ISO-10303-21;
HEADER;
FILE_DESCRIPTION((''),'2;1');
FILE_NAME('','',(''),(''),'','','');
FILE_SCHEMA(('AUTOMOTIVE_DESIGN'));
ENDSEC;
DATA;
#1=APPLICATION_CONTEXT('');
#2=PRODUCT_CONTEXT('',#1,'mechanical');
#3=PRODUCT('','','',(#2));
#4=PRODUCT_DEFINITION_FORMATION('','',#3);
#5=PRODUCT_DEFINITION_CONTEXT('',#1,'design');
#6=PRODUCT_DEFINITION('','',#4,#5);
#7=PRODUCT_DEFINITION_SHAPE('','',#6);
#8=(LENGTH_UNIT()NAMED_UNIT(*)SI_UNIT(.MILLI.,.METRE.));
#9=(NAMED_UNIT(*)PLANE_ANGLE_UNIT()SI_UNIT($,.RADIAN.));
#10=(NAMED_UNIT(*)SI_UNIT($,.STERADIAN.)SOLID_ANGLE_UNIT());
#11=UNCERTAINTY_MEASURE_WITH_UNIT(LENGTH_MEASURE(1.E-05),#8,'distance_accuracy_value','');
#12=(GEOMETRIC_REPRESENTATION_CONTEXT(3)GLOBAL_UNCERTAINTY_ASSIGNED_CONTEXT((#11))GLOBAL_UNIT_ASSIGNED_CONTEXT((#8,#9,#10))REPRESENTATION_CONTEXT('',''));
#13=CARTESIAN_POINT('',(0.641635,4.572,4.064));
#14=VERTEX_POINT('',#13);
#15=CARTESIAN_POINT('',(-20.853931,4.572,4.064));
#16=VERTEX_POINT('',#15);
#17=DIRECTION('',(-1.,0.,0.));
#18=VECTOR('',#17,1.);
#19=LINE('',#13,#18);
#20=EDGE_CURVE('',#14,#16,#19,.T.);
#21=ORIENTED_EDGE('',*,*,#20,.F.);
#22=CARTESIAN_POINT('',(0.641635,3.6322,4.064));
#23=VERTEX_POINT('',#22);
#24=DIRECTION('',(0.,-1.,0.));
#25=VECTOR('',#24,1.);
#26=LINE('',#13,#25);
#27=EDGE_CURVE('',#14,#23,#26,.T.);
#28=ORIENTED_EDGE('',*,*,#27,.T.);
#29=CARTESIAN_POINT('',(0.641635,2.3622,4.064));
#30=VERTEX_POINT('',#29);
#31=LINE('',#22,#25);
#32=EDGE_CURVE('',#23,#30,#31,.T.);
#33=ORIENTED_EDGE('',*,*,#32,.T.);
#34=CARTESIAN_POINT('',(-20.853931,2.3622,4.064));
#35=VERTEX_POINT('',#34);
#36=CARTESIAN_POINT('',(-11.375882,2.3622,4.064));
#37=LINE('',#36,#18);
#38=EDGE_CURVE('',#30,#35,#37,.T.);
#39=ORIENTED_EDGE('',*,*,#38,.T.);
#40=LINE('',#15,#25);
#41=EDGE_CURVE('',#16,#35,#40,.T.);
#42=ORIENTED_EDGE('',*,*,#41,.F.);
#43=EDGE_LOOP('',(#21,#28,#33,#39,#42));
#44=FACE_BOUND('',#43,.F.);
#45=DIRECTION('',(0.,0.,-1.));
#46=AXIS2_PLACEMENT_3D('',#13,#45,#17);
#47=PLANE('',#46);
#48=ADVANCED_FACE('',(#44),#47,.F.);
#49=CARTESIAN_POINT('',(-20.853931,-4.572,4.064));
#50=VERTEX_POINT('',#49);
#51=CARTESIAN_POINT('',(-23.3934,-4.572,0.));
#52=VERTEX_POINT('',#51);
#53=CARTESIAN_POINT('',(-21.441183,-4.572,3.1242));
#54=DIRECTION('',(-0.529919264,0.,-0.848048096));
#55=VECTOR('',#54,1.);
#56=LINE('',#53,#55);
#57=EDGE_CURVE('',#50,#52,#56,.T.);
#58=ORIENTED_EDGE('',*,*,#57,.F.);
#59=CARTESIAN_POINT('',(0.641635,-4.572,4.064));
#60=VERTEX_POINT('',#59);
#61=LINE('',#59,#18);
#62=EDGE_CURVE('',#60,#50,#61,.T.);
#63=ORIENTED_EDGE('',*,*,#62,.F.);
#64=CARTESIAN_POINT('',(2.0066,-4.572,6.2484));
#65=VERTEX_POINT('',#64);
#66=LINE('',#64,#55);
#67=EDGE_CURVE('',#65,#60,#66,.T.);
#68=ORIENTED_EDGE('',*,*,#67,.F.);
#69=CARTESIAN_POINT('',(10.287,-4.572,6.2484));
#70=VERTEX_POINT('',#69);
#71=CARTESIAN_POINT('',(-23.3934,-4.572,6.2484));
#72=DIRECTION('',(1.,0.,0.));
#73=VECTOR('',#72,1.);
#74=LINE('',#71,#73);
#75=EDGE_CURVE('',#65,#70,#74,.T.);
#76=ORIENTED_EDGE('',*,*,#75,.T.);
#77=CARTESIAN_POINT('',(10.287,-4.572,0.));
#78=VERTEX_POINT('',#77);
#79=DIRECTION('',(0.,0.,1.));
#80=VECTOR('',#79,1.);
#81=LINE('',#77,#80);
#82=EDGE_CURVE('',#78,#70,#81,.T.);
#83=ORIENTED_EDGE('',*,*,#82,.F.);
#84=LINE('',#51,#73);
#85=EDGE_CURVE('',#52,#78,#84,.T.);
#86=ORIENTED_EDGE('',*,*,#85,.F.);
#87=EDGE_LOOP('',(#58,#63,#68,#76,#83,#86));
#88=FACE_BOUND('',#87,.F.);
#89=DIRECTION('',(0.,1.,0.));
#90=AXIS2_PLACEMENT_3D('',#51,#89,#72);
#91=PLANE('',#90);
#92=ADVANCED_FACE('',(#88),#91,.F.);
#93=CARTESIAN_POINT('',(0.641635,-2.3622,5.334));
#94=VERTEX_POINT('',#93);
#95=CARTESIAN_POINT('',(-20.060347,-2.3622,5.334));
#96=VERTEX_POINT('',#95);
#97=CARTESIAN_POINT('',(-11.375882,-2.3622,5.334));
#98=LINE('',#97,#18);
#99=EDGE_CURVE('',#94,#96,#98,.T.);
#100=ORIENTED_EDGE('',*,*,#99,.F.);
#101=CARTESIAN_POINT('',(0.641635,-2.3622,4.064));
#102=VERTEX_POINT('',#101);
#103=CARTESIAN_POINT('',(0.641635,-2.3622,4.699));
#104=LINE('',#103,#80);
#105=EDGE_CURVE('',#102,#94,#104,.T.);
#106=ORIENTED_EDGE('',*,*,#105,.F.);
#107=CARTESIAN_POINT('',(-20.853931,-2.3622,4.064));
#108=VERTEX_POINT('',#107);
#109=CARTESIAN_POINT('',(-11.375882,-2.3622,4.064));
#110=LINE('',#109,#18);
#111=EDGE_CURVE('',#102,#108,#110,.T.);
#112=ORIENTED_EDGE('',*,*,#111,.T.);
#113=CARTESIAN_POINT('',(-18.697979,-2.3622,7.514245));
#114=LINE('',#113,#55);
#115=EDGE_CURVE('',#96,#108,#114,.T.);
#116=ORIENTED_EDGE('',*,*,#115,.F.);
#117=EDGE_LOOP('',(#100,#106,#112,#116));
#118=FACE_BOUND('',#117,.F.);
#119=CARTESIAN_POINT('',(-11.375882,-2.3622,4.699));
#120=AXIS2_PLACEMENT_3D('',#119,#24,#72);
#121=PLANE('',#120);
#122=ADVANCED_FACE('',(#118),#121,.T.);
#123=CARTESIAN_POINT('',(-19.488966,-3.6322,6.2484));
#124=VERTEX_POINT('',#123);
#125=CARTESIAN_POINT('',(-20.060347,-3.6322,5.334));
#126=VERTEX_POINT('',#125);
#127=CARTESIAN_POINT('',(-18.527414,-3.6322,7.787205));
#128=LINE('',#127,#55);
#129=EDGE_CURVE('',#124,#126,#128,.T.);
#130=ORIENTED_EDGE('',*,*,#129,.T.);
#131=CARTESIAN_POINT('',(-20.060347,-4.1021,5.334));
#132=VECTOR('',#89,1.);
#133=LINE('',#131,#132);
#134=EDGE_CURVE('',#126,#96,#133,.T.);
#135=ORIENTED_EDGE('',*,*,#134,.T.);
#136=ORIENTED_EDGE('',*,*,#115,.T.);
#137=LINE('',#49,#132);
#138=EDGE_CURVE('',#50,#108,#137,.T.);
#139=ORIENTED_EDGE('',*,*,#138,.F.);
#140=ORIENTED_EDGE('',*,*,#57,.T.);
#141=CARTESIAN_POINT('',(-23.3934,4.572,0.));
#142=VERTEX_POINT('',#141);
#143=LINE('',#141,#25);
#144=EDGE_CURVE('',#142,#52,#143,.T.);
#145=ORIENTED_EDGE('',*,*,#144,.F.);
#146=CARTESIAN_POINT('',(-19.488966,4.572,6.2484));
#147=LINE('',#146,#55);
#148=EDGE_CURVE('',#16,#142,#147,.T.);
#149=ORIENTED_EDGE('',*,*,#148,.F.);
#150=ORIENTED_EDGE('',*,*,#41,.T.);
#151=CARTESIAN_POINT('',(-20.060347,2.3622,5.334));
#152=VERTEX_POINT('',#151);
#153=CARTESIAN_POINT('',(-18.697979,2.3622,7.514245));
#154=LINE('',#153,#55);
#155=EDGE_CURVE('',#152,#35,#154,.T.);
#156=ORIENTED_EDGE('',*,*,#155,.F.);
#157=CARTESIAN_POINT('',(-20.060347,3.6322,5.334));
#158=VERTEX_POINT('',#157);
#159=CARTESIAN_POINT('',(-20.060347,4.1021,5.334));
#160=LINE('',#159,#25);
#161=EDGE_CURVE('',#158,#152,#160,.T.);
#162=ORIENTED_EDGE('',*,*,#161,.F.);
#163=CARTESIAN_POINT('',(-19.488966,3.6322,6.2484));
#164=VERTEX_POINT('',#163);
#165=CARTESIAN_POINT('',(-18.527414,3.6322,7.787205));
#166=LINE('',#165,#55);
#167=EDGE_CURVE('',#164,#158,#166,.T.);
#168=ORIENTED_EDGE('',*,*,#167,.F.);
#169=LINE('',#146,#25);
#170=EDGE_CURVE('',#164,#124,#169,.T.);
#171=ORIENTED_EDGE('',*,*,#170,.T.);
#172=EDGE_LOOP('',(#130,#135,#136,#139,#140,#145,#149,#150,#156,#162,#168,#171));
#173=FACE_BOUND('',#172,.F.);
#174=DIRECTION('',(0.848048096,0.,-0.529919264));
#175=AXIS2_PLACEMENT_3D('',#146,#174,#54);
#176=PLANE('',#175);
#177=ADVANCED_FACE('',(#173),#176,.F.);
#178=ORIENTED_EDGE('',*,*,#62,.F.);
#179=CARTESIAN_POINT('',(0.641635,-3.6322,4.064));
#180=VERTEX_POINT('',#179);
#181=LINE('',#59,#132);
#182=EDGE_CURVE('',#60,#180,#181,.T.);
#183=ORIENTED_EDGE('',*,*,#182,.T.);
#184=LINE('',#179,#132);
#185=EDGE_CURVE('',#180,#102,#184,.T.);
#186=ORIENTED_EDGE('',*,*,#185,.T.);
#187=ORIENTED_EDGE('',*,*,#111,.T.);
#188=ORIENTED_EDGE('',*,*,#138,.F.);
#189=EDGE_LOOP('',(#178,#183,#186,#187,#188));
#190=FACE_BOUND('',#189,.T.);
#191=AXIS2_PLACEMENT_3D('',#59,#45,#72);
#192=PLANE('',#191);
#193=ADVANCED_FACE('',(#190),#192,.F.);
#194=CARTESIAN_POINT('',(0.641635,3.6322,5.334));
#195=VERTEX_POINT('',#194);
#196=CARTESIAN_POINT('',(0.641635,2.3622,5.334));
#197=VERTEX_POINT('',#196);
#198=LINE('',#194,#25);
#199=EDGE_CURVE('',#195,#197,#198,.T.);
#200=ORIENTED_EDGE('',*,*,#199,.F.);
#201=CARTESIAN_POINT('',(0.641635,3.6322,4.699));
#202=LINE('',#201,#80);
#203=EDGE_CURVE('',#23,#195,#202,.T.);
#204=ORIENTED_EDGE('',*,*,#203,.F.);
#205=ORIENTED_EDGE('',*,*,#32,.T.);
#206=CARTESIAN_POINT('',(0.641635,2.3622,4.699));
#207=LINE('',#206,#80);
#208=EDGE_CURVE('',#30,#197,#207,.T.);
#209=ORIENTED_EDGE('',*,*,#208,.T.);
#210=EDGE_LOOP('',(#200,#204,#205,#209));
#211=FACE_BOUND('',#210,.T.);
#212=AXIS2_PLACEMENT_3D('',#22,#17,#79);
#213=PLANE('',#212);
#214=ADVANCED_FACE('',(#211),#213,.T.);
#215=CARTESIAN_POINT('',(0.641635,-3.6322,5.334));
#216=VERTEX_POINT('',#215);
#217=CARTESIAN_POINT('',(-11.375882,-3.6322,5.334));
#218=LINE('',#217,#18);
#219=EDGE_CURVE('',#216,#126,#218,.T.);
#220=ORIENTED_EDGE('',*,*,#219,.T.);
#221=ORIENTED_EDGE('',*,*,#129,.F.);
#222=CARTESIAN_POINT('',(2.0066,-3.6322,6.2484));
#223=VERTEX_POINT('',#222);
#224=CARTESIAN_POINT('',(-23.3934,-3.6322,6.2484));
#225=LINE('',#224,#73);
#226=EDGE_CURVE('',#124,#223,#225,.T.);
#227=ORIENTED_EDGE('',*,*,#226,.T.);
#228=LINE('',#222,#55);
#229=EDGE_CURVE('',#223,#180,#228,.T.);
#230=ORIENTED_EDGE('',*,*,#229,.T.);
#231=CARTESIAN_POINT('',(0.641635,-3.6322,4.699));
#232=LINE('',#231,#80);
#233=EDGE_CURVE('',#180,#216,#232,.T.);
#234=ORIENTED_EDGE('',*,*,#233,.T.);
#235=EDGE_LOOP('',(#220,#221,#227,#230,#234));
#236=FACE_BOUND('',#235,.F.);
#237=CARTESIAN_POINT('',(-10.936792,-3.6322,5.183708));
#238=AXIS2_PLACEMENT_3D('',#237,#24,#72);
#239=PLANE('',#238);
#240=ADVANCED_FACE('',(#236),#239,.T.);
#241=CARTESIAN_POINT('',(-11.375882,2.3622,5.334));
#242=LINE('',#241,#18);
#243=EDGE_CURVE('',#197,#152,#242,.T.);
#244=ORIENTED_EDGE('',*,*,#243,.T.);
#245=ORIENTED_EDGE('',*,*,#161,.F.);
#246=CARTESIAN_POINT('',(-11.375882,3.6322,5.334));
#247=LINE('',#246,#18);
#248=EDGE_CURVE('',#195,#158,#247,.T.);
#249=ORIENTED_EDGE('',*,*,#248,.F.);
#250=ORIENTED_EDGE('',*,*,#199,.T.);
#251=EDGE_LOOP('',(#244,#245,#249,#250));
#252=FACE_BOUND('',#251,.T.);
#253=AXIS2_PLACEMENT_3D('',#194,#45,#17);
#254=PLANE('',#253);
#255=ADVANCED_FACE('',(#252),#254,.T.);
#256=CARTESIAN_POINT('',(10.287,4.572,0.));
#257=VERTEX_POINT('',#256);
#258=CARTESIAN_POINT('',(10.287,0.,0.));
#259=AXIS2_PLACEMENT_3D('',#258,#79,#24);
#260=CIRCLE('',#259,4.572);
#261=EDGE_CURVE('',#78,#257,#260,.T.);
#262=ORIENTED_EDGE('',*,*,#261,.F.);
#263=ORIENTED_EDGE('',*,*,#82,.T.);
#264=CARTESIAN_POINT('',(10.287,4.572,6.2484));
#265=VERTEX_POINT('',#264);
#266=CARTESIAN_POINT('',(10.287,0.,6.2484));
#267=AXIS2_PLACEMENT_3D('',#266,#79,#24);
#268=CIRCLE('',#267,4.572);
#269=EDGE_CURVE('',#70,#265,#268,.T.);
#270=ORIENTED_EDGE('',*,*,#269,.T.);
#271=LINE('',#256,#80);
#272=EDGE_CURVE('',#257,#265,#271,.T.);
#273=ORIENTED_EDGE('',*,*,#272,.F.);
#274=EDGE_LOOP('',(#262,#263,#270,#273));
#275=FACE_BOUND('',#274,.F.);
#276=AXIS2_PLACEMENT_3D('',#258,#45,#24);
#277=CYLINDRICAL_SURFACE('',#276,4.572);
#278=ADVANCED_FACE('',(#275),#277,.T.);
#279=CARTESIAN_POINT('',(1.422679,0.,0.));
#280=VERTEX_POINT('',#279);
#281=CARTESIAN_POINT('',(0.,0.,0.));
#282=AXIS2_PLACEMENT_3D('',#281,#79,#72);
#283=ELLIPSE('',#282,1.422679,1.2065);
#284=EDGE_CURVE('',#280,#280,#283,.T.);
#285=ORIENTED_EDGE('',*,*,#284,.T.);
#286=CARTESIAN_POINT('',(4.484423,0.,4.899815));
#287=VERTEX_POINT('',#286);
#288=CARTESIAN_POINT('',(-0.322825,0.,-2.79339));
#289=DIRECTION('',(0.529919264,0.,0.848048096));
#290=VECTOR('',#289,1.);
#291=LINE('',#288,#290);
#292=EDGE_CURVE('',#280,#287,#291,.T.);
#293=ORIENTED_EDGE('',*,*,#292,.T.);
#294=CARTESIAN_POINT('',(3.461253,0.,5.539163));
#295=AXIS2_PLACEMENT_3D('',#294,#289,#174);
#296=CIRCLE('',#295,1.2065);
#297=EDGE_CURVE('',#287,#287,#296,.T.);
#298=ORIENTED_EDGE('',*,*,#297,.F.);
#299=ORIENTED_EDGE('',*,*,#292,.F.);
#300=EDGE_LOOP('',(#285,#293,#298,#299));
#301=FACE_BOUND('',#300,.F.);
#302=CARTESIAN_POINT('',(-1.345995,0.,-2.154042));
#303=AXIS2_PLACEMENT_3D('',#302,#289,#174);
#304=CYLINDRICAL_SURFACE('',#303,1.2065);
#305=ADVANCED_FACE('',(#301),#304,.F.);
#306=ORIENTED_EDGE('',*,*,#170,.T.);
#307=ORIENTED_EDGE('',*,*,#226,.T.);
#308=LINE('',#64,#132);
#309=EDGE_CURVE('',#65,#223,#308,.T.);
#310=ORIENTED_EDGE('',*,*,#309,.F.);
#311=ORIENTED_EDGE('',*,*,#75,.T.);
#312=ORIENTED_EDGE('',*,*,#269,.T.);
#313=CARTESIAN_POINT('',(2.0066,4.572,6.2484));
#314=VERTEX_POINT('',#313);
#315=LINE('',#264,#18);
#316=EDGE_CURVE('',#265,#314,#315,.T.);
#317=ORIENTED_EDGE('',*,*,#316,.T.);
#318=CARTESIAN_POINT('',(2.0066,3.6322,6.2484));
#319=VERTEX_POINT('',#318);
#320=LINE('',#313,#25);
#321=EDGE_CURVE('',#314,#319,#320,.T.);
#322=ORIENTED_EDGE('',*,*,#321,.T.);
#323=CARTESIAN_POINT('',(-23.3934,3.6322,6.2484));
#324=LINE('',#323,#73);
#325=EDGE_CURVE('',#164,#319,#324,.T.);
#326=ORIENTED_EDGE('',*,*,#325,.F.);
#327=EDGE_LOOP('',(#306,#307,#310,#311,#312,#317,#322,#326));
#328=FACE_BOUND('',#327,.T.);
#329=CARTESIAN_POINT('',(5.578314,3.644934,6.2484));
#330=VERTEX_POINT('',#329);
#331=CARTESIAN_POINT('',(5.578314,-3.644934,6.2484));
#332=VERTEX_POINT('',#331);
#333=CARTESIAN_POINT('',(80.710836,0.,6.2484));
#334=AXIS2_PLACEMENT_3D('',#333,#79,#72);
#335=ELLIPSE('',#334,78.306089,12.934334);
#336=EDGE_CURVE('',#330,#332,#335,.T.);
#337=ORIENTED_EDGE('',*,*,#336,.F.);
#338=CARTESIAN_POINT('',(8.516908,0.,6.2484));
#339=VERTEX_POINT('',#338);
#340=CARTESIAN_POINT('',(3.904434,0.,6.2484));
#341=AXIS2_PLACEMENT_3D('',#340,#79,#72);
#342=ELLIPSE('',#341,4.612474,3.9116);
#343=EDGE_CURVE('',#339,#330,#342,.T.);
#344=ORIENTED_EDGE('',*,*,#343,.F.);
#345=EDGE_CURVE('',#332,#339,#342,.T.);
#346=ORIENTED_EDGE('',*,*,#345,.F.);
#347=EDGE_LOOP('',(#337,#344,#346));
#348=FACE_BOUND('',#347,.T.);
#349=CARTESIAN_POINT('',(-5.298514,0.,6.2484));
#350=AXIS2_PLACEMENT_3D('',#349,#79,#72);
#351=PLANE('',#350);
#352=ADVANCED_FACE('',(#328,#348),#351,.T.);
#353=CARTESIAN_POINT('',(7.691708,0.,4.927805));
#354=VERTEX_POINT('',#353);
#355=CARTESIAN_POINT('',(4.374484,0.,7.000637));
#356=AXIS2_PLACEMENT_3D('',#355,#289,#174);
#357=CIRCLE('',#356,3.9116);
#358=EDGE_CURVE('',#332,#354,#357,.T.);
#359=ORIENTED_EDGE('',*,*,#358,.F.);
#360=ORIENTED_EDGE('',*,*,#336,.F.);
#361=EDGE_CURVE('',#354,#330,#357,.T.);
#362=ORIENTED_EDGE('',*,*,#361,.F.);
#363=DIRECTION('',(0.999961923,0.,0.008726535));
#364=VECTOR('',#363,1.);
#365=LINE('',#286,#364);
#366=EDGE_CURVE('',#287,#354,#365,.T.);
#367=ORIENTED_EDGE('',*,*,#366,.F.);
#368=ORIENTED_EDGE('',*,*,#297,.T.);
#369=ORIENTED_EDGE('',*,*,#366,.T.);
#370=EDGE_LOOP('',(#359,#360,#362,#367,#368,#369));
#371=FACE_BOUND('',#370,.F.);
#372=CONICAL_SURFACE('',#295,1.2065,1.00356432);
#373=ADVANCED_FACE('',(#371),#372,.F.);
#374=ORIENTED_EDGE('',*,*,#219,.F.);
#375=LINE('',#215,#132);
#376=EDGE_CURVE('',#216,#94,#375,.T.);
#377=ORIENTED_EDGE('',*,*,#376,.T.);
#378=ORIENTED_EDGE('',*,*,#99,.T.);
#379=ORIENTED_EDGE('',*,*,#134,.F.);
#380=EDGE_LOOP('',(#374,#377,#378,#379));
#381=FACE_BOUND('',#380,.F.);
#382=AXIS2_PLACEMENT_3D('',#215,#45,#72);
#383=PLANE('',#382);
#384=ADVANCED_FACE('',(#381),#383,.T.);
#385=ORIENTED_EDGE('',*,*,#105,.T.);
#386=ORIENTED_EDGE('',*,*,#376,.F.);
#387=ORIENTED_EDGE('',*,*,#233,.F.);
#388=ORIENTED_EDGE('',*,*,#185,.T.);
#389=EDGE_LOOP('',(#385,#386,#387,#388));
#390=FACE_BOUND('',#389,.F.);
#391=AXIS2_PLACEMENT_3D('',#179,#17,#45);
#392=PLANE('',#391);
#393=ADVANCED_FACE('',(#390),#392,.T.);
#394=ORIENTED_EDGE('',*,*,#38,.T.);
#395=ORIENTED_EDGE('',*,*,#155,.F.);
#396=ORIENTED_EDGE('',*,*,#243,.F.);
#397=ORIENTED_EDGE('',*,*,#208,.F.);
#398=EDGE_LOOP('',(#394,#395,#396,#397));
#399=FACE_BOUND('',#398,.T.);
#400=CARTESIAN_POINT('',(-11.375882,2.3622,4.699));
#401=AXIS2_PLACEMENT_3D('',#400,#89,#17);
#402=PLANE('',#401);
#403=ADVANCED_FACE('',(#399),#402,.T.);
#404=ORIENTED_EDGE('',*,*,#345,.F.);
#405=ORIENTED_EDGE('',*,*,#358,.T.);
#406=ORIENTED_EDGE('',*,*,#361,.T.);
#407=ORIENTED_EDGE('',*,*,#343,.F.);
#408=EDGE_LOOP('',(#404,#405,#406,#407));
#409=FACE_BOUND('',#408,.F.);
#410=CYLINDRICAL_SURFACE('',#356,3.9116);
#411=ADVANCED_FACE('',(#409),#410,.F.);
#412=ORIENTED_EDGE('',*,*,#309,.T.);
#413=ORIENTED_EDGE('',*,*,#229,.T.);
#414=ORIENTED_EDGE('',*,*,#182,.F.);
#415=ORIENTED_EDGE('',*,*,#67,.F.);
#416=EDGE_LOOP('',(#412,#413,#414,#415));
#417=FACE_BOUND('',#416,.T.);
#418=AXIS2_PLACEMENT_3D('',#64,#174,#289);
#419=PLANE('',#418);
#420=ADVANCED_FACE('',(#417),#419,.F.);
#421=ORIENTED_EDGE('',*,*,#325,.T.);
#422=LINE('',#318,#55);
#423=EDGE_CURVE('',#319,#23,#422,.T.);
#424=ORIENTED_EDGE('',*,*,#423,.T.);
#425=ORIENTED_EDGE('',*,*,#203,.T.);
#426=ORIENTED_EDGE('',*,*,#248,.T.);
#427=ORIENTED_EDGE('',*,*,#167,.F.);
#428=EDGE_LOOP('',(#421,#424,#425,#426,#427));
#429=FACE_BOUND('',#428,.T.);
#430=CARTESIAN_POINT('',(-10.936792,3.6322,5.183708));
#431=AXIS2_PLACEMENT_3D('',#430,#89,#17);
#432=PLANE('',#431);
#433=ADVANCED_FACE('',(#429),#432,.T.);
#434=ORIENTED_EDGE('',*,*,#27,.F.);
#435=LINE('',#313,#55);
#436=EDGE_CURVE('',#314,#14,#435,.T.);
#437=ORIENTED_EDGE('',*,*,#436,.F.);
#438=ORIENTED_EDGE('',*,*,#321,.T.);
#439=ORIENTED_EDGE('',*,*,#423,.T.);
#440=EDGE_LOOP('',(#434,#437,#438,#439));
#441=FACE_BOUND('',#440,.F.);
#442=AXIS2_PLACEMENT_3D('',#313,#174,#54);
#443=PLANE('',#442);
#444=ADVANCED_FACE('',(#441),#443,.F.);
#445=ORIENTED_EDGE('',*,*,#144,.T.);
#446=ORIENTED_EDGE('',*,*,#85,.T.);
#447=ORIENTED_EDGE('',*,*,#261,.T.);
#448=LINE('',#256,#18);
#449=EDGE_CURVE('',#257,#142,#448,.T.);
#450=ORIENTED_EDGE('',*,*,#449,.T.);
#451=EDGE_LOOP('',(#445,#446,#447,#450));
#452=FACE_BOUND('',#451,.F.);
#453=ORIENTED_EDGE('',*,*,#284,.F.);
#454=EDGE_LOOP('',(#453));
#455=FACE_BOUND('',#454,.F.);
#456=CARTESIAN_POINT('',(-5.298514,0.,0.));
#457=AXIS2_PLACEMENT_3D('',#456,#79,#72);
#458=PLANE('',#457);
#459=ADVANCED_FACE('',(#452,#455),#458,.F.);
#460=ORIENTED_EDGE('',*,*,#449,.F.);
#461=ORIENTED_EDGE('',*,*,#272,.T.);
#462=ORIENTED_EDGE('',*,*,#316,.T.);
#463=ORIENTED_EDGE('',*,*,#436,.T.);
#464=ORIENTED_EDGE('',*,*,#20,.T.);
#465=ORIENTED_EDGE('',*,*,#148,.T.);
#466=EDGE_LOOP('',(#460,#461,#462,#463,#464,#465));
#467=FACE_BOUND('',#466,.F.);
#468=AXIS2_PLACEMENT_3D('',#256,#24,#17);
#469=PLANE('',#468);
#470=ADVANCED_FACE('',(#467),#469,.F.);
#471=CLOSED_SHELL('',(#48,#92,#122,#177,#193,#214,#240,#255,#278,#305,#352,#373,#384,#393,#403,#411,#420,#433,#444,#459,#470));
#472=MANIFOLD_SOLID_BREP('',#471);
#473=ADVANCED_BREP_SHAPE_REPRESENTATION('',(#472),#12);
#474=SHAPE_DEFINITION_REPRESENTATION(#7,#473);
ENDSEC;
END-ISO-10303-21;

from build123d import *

# Parameters (mm, degrees)
F1_DEPTH = 6.2484
F3_DEPTH = 0.9398
F4_W     = 24.0350353877
F4_H     = 1.27
F5_DEPTH = 1.27
F7_DEPTH = 9.145


with BuildPart() as f1:
    # F0 (on Top) → F1 (new body)
    with BuildSketch(Plane.XY):
        with BuildLine():
            Line((10.287, 4.572), (-23.3934, 4.572))
            Line((-23.3934, 4.572), (-23.3934, -4.572))
            Line((-23.3934, -4.572), (10.287, -4.572))
            ThreePointArc((10.287, -4.572), (14.859, 0), (10.287, 4.572))
        make_face()
    extrude(amount=F1_DEPTH)

    # F2 (on face) → F3 (cut)
    with BuildSketch(Plane(origin=(0, 4.572, 0), x_dir=(-1, 0, 0), z_dir=(0, 1, 0))):
        Polygon((23.3934, 6.2484), (-2.0066, 6.2484), (-0.6416353877, 4.064), (23.3934, 4.064), align=None)
    extrude(amount=-F3_DEPTH, mode=Mode.SUBTRACT)

    # F4 (on face) → F5 (cut)
    with BuildSketch(Plane(origin=(0, 3.6322, 0), x_dir=(-1, 0, 0), z_dir=(0, 1, 0))):
        with Locations((11.3758823062, 4.699)):
            Rectangle(F4_W, F4_H)
    extrude(amount=-F5_DEPTH, mode=Mode.SUBTRACT)

    # F6 (on face) → F7 (cut, through all)
    with BuildSketch(Plane(origin=(0, 4.572, 0), x_dir=(-1, 0, 0), z_dir=(0, 1, 0))):
        Polygon((19.4889663415, 6.2484), (23.3934, 0), (23.3934, 6.2484), align=None)
    extrude(amount=-F7_DEPTH, mode=Mode.SUBTRACT)

    # F8: F1 across plane


with BuildPart() as f1_1:
    add(f1.part)
    add(f1.part.mirror(Plane.XZ), mode=Mode.INTERSECT)

    # F9 (on Front) → F10 (revolve, cut)
    with BuildSketch(Plane.XZ):
        Polygon((3.4612531172, 5.5391628772), (0, 0), (-1.3459949312, -2.1540421642), (-0.3228249031, -2.7933897565), (4.4844231452, 4.8998152849), align=None)
        Polygon((5.7204784574, 9.154679198), (3.4612531172, 5.5391628772), (4.4844231452, 4.8998152849), (7.6917084592, 4.9278048398), (9.0377033903, 7.081847004), align=None)
    revolve(axis=Axis((2.8602392287, 0, 4.577339599), (0.5299192642, 0, 0.8480480962)), mode=Mode.SUBTRACT)


solid = f1_1.part
